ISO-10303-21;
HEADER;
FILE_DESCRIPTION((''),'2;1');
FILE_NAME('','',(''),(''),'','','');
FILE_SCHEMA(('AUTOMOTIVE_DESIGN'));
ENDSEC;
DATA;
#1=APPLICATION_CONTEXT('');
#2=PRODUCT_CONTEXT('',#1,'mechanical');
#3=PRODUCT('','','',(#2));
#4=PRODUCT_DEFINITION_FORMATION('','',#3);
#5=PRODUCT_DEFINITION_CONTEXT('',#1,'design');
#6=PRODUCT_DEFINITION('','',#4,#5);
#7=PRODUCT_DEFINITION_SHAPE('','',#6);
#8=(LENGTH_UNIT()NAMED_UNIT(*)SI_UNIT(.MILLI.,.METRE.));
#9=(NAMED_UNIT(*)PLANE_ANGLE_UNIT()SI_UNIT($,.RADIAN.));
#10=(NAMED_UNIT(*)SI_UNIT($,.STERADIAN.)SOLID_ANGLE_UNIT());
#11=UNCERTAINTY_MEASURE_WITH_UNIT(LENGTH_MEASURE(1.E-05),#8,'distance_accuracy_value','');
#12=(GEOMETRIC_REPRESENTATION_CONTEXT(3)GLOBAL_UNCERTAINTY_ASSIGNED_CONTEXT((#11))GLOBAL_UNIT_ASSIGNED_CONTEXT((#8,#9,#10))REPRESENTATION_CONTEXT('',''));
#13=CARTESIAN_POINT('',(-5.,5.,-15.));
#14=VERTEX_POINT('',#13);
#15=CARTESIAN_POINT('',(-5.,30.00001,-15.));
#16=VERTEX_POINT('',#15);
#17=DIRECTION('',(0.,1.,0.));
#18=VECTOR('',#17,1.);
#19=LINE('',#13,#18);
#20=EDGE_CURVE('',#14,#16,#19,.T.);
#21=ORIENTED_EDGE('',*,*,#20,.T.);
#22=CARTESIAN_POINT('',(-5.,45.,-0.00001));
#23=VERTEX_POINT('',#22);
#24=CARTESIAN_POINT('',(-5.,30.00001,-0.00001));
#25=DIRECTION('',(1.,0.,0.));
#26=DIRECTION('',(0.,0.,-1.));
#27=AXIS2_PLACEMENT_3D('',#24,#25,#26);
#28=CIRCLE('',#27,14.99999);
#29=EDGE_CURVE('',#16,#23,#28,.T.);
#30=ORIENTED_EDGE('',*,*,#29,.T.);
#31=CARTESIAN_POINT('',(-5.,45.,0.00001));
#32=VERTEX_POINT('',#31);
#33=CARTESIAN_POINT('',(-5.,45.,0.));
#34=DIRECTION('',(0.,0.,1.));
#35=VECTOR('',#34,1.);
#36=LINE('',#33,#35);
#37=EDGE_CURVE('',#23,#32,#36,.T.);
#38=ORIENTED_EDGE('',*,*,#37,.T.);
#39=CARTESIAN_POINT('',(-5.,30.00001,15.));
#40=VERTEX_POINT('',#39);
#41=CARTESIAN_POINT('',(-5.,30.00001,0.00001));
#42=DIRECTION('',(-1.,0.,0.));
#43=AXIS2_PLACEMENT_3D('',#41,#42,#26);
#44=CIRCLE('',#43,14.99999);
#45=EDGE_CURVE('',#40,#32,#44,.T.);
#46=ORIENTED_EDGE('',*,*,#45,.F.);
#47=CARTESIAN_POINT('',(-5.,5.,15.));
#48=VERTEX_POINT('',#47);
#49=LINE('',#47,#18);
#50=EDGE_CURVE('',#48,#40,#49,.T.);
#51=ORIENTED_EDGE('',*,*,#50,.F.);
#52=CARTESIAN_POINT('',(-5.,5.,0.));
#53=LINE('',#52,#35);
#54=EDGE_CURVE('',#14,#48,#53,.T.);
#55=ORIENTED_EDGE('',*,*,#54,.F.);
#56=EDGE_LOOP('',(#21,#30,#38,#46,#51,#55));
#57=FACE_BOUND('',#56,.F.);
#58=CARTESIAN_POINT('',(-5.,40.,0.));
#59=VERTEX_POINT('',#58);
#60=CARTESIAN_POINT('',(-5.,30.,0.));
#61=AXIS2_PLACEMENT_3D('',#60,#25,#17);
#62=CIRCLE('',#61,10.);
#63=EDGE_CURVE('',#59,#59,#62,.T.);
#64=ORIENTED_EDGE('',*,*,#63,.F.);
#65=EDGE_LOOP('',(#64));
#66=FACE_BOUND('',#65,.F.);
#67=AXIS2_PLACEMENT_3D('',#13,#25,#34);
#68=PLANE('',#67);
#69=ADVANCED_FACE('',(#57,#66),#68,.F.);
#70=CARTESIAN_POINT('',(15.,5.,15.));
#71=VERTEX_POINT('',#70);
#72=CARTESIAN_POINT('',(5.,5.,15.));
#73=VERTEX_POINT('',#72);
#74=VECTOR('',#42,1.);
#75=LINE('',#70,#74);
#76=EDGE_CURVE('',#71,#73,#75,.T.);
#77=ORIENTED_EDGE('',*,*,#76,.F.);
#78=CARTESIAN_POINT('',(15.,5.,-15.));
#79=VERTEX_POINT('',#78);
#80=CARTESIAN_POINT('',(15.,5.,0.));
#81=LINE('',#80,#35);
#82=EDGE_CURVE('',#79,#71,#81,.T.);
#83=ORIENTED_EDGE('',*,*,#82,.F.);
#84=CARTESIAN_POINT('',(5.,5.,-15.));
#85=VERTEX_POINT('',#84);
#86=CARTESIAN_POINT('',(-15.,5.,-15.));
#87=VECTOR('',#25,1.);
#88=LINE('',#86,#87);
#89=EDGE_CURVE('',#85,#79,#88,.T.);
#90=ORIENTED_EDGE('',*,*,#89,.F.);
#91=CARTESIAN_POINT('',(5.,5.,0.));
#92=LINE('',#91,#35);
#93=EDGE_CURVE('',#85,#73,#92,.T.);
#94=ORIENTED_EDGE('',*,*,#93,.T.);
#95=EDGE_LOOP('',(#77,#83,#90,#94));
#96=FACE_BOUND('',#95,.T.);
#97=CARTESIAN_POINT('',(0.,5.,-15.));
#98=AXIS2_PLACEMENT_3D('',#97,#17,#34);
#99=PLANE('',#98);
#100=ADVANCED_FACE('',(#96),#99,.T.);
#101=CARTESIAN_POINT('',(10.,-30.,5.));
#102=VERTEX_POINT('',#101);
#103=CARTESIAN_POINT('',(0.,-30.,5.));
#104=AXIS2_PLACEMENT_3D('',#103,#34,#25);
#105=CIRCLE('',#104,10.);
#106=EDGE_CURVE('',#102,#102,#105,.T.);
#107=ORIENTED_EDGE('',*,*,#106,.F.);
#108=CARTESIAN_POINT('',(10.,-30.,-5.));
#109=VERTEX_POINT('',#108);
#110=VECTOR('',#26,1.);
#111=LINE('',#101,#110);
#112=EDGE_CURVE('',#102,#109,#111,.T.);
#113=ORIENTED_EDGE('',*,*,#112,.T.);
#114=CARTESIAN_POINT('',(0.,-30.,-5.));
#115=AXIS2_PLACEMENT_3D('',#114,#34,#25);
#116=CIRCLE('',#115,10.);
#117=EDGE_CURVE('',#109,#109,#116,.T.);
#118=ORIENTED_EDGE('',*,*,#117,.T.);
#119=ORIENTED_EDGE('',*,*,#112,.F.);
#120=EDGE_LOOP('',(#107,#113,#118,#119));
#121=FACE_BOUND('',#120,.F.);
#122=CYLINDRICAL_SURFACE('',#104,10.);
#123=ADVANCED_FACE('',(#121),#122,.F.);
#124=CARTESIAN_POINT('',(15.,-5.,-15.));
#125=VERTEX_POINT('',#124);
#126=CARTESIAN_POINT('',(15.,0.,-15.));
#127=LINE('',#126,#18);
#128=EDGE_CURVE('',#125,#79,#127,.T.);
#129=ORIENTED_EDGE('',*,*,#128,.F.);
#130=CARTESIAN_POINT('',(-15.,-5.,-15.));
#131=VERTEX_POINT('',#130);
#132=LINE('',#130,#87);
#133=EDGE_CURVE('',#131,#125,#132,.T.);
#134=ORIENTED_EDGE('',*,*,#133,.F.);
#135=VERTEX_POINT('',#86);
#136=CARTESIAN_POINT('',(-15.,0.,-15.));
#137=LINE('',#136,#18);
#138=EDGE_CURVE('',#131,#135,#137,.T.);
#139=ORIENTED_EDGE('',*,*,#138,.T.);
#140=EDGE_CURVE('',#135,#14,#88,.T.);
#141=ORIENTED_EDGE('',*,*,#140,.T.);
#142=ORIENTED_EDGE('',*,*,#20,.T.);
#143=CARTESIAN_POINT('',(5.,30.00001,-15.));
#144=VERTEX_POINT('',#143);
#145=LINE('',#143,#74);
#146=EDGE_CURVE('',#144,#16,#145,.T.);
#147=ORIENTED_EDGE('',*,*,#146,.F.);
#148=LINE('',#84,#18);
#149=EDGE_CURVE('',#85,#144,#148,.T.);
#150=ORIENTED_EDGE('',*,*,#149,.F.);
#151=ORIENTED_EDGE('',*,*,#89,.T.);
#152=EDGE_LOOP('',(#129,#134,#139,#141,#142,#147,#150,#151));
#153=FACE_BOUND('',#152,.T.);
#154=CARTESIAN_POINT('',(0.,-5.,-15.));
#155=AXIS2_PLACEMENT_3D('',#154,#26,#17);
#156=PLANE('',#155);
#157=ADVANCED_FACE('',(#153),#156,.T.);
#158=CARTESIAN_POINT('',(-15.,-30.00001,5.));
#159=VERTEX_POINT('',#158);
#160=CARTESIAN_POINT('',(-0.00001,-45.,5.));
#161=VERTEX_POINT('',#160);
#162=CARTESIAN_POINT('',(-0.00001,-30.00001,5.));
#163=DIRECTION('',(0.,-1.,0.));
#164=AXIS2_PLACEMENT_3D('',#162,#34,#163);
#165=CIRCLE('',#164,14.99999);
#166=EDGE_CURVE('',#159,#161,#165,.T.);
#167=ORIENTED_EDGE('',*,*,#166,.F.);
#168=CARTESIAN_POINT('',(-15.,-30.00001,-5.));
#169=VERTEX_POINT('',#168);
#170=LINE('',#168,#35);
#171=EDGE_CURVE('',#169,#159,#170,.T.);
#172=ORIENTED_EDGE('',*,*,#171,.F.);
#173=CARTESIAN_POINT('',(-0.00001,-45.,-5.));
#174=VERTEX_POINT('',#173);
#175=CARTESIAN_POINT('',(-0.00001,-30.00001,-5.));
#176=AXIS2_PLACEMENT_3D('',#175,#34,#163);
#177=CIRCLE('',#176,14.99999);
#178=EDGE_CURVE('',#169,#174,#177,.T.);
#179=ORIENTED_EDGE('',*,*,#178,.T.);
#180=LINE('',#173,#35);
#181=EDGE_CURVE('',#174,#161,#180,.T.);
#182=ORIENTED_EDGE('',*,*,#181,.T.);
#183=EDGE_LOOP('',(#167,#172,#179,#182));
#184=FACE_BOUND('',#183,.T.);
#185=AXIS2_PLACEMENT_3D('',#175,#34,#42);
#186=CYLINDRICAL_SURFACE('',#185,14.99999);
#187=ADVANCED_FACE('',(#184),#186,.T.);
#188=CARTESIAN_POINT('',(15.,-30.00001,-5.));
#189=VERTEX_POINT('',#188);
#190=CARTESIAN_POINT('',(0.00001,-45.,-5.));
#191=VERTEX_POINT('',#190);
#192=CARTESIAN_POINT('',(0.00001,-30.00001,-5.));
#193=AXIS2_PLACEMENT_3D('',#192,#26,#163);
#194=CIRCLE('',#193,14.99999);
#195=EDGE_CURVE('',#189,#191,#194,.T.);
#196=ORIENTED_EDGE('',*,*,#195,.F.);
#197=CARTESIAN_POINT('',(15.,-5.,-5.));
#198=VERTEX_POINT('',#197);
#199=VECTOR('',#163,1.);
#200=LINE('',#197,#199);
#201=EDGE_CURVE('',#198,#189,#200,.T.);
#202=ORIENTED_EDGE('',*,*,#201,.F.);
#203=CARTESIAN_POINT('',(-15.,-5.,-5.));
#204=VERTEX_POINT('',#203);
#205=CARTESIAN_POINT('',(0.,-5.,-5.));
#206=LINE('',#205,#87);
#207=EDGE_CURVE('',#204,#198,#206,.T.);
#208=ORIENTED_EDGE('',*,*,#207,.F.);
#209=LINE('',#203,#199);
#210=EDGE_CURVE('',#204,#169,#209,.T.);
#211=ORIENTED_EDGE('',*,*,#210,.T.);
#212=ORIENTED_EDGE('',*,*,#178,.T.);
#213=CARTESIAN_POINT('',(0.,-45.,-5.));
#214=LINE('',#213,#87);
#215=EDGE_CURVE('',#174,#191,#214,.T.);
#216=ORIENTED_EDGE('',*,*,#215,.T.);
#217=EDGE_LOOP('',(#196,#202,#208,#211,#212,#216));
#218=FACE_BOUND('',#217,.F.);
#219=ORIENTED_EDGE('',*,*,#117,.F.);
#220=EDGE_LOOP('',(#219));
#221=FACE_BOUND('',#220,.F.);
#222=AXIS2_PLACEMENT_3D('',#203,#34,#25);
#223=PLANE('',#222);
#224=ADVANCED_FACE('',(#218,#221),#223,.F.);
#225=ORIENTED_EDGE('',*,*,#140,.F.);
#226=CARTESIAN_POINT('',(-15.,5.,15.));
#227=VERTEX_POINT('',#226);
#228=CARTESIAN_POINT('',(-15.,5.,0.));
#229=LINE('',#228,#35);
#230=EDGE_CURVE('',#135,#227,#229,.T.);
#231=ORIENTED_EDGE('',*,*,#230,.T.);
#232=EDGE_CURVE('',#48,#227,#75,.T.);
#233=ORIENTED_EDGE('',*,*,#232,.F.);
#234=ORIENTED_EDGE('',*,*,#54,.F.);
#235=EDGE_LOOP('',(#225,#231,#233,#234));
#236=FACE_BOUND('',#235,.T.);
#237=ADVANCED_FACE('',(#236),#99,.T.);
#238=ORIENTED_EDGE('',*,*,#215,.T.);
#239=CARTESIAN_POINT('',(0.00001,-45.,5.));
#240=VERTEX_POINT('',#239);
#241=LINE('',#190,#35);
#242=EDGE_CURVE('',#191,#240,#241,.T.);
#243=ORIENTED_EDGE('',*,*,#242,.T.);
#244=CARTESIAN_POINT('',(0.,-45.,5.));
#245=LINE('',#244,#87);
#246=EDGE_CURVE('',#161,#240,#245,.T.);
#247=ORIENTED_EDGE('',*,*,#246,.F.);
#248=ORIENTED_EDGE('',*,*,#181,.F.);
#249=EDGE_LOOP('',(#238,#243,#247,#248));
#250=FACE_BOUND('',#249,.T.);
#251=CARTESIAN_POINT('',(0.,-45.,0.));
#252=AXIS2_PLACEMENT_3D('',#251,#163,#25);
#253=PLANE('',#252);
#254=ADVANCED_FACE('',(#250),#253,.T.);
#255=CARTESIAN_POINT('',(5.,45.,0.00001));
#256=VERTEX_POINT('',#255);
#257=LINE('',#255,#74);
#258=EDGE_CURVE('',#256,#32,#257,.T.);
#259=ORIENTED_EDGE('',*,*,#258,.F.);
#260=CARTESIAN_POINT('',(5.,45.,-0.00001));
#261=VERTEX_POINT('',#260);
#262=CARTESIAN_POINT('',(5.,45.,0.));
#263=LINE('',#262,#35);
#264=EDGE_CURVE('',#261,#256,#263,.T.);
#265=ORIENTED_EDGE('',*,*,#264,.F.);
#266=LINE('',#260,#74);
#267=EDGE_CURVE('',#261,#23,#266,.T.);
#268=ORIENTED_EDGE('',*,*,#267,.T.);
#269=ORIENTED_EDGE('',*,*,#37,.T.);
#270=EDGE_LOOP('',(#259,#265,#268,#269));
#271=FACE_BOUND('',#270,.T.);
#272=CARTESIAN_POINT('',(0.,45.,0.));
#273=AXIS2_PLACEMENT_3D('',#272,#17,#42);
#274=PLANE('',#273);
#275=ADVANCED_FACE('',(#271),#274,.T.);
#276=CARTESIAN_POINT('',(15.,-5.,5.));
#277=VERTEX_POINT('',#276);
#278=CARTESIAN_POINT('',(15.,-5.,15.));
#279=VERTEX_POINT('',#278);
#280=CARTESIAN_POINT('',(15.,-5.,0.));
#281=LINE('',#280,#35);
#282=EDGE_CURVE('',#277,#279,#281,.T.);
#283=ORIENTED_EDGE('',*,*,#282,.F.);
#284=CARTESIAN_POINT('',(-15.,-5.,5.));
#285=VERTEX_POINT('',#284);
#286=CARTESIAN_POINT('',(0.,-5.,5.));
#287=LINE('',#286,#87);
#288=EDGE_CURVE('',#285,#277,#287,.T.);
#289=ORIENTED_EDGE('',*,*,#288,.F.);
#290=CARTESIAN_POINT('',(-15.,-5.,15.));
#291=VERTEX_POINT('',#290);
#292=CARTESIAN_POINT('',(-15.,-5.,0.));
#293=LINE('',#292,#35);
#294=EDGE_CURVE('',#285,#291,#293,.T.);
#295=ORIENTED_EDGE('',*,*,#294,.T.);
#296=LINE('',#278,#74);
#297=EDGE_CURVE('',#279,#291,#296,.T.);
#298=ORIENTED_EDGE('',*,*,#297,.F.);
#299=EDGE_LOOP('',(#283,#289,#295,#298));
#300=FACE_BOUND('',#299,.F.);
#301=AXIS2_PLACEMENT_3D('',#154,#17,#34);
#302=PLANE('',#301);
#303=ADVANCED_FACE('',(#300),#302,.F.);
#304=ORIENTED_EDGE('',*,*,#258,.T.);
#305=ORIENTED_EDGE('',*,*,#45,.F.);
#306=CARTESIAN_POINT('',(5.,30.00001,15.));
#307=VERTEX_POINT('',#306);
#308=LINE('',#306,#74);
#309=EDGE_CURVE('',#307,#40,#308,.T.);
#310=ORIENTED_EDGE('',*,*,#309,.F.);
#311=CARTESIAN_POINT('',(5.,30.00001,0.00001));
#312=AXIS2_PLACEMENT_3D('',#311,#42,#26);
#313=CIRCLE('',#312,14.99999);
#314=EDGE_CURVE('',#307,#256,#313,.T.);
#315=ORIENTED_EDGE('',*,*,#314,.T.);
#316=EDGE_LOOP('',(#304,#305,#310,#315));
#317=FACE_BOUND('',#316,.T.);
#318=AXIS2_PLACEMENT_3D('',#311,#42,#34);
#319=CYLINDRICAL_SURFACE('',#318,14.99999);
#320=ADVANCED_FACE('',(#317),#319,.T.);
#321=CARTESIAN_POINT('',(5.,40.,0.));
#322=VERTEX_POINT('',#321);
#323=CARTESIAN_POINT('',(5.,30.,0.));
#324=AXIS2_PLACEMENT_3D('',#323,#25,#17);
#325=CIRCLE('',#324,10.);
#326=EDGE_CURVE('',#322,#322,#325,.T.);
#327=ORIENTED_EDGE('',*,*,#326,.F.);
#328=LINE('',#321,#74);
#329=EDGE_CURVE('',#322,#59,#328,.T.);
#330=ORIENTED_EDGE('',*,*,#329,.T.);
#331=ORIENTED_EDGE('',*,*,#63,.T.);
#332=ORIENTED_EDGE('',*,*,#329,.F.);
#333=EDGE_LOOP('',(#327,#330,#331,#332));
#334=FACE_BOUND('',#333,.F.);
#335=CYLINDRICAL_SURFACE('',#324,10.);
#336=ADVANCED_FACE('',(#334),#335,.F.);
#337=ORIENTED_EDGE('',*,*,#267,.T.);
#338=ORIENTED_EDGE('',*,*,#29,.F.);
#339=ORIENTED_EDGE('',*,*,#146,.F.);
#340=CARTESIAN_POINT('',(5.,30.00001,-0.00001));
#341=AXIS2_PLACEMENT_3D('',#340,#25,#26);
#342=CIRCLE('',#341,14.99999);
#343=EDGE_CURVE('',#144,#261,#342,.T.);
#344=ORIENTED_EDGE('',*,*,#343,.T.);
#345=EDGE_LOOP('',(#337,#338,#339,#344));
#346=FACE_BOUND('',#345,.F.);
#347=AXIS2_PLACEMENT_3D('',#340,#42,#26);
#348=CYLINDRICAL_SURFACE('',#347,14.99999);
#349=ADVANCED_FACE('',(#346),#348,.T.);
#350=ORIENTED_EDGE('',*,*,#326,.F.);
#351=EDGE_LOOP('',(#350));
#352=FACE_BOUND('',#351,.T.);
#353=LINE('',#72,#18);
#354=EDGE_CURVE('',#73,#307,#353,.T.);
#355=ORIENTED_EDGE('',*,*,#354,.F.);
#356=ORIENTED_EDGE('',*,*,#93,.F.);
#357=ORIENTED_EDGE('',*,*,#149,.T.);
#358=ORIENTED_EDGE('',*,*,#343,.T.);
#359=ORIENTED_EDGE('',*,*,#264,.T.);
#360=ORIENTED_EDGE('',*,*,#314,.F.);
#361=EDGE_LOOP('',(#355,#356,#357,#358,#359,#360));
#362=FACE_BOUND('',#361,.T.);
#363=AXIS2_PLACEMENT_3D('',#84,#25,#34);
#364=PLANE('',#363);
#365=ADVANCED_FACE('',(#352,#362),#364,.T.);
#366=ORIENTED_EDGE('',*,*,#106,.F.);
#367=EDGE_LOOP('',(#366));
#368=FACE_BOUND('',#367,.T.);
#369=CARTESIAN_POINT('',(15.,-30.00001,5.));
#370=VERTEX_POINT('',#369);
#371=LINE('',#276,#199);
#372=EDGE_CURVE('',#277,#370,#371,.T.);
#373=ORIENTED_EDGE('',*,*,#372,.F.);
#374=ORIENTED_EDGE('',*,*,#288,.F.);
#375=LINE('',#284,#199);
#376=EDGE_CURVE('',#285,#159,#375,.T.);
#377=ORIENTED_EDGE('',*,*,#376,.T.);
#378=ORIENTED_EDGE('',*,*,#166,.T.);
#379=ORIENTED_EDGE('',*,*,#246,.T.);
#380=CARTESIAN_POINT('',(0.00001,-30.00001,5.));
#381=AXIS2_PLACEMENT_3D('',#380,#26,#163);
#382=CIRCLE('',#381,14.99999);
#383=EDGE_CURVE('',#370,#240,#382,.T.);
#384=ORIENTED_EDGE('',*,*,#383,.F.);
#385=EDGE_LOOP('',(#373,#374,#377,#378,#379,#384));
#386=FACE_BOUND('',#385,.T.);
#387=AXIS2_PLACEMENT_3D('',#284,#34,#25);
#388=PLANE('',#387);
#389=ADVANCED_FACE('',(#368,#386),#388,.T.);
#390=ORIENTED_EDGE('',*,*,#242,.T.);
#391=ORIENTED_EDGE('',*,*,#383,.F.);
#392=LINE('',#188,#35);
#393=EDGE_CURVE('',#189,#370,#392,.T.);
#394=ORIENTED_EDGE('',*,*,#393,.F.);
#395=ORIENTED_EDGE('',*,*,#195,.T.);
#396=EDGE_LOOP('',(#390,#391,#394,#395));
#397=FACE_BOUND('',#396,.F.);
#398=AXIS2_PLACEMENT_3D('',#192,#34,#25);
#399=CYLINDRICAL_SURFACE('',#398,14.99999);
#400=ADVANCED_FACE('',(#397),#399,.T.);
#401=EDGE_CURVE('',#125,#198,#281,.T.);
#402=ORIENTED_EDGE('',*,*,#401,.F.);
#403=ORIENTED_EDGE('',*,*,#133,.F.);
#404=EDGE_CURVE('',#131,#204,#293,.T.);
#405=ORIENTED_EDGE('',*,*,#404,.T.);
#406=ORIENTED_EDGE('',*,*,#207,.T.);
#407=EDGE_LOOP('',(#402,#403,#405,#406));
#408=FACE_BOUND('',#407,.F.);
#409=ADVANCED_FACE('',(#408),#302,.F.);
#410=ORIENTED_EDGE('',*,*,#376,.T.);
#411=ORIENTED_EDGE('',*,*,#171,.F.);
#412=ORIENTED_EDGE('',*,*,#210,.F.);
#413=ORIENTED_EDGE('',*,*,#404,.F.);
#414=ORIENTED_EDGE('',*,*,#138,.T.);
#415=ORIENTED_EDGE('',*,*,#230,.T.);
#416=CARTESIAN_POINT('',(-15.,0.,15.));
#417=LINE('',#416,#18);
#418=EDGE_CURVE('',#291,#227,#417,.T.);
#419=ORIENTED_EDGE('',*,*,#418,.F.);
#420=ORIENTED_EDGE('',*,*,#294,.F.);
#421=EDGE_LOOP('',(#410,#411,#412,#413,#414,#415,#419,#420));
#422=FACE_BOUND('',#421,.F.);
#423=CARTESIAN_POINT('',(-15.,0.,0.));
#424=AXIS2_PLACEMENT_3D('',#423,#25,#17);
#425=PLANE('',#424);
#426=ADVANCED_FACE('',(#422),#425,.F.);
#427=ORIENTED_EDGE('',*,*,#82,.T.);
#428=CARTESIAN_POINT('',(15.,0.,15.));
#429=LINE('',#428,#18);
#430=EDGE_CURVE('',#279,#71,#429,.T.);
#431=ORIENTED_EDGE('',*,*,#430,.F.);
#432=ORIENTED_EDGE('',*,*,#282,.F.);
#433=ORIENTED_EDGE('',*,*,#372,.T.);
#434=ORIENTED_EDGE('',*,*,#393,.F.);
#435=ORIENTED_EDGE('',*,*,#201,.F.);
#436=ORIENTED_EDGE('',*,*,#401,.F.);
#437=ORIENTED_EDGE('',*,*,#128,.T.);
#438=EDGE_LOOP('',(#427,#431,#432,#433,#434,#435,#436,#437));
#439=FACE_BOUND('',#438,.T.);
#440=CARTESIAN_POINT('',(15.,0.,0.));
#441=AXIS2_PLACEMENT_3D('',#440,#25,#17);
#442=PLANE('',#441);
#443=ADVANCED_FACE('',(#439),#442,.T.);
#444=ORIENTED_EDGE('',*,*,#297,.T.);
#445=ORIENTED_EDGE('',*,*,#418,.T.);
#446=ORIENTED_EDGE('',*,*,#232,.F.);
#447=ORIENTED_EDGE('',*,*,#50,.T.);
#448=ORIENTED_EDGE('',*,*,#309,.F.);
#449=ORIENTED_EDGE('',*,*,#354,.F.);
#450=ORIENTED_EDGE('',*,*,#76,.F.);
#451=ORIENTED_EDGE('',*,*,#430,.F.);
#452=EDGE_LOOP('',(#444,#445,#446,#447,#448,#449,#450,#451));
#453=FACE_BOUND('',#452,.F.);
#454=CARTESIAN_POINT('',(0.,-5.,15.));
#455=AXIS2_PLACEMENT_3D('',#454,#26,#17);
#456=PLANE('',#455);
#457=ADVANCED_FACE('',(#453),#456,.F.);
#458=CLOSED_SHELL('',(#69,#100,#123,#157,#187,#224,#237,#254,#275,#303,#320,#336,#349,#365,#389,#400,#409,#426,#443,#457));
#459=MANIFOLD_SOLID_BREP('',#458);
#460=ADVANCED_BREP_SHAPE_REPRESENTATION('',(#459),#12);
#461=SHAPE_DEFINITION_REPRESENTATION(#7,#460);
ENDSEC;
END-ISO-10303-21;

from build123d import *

# Parameters (mm, degrees)
F0_W      = 10
F0_H      = 30
F1_DEPTH  = 15
F2_W      = 30
F2_H      = 10
F3_DEPTH  = 40
F4_R      = 14.99999
F5_W      = 10
F5_H      = 30
F6_DEPTH  = 40
F7_R      = 14.99999
F8_R      = 10
F9_DEPTH  = 10
F10_R     = 10
F11_DEPTH = 10


# Not quite as in the source:
# - a fillet or chamfer is up to 0.001 mm smaller than in the source, because OpenCascade refuses the exact size


with BuildPart() as f1:
    # F0 (on Right) → F1 (new body, symmetric)
    with BuildSketch(Plane.YZ):
        Rectangle(F0_W, F0_H)
    extrude(amount=F1_DEPTH, both=True)

    # F2 (on face) → F3 (join)
    with BuildSketch(Plane.XZ.offset(5)):
        Rectangle(F2_W, F2_H)
    extrude(amount=F3_DEPTH)

    # F4 (radius 15 in the source; OpenCascade refuses exactly that, so slightly less here)
    f4_edges = [f1.edges().sort_by_distance(p)[0] for p in [
        (-15, -45, 0),
        (15, -45, 0),
    ]]
    fillet(f4_edges, radius=F4_R)

    # F5 (on face) → F6 (join)
    with BuildSketch(Plane(origin=(0, 5, 0), x_dir=(-1, 0, 0), z_dir=(0, 1, 0))):
        Rectangle(F5_W, F5_H)
    extrude(amount=F6_DEPTH)

    # F7 (radius 15 in the source; OpenCascade refuses exactly that, so slightly less here)
    f7_edges = [f1.edges().sort_by_distance(p)[0] for p in [
        (0, 45, 15),
        (0, 45, -15),
    ]]
    fillet(f7_edges, radius=F7_R)

    # F8 (on face) → F9 (cut, through all)
    with BuildSketch(Plane.XY.offset(5)):
        with Locations((0, -30)):
            Circle(F8_R)
    extrude(amount=-F9_DEPTH, mode=Mode.SUBTRACT)

    # F10 (on face) → F11 (cut, through all)
    with BuildSketch(Plane.YZ.offset(5)):
        with Locations((30, 0)):
            Circle(F10_R)
    extrude(amount=-F11_DEPTH, mode=Mode.SUBTRACT)


solid = f1.part
